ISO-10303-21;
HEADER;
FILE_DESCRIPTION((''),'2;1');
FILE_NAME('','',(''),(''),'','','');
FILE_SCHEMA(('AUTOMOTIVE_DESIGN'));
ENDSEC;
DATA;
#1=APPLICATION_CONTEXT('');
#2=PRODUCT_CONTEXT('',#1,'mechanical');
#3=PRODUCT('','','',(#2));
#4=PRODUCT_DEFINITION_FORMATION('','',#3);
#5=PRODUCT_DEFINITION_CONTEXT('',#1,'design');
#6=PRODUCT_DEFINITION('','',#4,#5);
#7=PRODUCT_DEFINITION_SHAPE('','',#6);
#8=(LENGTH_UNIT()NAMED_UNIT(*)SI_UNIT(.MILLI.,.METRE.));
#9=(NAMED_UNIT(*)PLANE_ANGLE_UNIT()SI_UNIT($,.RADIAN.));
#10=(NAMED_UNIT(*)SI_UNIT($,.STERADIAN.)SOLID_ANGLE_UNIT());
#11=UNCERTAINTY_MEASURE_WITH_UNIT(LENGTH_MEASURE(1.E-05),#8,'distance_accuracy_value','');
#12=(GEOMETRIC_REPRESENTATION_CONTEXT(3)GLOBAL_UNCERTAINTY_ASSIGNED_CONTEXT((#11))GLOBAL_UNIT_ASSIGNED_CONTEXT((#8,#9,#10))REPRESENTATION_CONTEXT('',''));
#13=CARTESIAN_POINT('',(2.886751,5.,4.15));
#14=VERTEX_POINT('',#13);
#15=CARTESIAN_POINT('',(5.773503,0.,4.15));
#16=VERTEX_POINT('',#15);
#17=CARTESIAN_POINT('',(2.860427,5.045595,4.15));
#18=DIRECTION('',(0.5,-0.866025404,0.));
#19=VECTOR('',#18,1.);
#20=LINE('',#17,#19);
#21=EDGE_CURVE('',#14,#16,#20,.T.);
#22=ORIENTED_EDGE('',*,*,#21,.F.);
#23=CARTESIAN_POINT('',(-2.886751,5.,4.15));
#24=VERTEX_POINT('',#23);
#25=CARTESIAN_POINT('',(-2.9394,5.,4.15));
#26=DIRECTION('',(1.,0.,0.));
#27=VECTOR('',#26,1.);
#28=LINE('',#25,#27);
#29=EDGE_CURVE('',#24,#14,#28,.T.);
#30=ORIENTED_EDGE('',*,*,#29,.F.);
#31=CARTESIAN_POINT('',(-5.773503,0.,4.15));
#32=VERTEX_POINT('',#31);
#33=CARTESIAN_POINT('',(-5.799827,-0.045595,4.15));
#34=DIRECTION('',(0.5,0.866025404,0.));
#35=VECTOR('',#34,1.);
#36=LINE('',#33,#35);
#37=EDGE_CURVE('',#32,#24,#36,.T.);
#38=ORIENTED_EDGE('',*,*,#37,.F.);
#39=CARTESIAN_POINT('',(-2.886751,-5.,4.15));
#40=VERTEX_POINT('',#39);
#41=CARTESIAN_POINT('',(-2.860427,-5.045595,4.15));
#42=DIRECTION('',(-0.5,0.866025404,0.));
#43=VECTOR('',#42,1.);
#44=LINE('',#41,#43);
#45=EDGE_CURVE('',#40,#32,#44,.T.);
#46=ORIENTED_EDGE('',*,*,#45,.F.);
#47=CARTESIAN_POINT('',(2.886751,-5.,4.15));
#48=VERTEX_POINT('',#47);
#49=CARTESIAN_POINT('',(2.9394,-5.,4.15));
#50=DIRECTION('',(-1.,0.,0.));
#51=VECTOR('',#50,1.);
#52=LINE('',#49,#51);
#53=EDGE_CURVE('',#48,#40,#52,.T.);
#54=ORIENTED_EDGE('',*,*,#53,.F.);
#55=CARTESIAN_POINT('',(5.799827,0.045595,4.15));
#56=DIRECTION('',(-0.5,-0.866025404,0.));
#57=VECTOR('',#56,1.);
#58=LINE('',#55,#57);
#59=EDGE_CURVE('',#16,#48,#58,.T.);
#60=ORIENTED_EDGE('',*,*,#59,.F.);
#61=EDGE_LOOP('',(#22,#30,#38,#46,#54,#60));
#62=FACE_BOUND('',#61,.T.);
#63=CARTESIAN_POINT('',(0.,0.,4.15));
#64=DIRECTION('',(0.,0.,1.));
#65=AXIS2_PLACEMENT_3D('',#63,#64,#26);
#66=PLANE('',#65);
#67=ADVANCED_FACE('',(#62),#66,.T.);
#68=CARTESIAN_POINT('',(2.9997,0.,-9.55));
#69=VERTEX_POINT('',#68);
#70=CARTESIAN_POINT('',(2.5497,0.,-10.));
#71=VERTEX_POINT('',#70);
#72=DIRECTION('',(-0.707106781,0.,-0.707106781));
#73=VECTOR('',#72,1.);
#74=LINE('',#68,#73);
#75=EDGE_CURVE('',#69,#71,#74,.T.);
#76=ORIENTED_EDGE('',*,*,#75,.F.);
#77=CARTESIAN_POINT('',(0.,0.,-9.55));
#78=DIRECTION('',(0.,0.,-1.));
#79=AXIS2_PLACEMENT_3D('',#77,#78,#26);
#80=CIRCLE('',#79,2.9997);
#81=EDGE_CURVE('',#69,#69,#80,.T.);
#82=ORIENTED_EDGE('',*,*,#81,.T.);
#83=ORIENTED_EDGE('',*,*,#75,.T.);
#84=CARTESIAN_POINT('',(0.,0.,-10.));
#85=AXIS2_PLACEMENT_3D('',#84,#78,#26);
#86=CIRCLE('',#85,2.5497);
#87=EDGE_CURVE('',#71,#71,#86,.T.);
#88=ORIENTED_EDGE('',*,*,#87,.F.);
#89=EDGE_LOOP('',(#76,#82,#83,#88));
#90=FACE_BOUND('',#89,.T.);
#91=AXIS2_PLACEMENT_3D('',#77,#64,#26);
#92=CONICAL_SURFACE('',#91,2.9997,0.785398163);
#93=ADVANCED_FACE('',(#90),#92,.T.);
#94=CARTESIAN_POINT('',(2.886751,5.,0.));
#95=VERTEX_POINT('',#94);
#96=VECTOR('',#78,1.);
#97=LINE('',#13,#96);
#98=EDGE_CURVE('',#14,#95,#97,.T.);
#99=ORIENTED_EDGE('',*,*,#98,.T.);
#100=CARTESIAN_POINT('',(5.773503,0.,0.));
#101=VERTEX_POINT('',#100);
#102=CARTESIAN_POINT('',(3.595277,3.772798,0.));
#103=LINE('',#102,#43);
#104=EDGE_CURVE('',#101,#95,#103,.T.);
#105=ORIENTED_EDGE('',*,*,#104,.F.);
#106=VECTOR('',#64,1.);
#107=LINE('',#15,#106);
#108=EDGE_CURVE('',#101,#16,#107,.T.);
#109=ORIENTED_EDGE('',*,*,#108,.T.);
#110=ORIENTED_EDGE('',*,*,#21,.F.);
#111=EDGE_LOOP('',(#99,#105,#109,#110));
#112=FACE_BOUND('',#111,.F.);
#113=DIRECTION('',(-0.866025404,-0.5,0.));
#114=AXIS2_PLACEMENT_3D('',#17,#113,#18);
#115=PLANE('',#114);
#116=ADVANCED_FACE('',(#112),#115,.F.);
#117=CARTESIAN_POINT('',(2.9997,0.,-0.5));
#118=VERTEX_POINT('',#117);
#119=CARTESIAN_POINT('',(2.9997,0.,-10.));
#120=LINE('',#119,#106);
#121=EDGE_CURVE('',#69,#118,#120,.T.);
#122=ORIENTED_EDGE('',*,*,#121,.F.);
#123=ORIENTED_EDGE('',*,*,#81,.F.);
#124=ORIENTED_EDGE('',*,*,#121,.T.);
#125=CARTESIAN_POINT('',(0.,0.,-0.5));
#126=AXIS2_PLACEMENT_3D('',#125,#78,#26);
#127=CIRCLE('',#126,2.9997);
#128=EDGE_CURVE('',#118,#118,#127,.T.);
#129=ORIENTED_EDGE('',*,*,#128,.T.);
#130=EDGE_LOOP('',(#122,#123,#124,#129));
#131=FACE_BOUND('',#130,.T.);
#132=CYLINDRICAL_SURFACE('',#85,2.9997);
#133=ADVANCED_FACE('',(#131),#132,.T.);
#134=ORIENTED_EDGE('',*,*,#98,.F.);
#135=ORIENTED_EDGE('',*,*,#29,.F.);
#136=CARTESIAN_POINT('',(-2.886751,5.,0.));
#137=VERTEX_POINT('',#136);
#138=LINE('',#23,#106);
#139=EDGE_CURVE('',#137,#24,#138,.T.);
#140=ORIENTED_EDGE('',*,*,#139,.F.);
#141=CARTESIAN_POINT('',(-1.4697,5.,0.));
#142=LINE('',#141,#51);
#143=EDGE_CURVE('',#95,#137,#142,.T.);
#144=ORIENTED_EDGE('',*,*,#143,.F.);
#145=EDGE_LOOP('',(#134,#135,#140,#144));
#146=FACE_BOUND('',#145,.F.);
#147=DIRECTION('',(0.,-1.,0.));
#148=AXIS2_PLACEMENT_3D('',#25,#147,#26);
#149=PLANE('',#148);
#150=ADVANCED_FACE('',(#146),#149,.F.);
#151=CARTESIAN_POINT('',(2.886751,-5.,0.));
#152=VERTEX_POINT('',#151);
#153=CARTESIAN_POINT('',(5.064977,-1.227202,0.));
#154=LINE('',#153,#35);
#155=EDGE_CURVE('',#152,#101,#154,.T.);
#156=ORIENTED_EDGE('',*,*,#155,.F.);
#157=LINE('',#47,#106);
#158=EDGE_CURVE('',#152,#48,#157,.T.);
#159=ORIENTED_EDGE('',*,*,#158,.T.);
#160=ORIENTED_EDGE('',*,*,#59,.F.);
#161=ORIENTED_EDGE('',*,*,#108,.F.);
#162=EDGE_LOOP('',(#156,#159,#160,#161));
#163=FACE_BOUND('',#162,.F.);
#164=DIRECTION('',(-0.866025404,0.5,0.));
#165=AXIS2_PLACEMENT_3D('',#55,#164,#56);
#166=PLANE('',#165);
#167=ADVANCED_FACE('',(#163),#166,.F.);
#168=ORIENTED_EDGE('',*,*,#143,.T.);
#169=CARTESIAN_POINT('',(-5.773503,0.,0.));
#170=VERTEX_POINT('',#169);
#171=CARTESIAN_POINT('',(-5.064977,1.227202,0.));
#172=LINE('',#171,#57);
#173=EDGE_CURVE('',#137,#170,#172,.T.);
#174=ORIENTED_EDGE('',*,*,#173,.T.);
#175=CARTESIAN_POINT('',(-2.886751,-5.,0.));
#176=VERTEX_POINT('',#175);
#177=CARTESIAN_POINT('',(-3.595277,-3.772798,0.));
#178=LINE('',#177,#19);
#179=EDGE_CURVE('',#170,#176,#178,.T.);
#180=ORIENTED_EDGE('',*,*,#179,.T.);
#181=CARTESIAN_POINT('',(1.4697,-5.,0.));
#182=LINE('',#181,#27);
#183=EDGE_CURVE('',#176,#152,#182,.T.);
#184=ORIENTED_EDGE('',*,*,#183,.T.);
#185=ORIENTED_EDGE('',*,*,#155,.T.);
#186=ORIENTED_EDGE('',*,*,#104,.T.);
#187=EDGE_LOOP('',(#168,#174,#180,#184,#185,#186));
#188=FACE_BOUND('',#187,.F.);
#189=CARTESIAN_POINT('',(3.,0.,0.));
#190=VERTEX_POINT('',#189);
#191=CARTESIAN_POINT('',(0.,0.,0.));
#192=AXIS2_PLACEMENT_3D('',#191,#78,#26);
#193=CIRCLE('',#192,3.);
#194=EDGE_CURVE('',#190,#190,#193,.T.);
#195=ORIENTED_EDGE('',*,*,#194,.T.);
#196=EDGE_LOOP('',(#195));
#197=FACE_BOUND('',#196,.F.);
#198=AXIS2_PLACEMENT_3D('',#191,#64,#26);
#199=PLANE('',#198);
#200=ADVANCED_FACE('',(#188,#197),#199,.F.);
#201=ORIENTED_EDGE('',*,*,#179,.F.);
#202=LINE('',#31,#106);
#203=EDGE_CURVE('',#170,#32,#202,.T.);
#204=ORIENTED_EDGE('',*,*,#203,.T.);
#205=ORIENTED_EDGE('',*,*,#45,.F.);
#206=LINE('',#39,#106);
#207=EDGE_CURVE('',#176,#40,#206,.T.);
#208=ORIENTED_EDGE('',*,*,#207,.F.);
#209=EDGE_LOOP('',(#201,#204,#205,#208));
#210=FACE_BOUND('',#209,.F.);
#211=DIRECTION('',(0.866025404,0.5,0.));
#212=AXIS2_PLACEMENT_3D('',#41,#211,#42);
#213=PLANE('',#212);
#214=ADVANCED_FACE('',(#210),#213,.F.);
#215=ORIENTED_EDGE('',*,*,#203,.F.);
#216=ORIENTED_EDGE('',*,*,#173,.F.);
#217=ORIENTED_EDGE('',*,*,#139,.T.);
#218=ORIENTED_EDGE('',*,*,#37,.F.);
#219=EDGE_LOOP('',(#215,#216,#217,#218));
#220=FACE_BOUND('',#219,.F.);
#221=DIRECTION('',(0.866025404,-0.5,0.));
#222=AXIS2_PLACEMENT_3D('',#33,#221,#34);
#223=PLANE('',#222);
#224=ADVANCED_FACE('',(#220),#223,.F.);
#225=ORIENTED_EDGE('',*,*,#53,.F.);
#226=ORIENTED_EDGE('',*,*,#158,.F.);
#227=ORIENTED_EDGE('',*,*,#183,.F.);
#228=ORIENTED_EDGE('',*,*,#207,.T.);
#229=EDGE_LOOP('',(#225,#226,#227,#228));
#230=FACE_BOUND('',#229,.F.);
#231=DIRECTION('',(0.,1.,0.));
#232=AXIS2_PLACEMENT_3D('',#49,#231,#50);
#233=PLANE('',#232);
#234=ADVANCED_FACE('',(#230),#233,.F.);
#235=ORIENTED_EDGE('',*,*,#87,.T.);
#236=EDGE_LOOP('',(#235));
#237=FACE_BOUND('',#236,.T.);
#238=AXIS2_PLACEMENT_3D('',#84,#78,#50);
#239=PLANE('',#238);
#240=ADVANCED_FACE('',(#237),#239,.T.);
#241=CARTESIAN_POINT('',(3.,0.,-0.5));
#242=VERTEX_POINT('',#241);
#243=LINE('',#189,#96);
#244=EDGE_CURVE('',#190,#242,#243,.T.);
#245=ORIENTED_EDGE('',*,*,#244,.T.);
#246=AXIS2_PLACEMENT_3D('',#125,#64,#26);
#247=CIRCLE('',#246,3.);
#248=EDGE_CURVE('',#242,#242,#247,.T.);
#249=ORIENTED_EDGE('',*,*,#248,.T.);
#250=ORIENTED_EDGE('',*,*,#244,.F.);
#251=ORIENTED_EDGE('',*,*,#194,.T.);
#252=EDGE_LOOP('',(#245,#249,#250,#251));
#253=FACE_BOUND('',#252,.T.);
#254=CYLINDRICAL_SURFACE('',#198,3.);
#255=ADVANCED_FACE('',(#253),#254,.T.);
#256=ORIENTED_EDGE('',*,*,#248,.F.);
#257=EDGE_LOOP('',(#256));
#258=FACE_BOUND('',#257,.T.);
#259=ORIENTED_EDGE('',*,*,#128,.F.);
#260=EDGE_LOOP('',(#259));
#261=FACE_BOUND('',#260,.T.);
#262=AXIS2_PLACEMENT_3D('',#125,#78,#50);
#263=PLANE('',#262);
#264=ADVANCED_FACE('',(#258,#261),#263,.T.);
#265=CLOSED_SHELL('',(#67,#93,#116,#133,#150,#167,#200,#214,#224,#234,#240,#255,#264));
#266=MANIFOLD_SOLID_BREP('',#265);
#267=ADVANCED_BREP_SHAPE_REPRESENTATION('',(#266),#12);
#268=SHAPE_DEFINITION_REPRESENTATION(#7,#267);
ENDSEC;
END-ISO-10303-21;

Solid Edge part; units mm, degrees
sketch "Sketch1" plane through (0, 0, 0) normal (0, 0, 1) x (1, 0, 0)
  circle A0 centre (0, 0) radius 5.8
  dimension "D1" = 11.6
extrude "Protrusion1" add sketch "Sketch1" along normal blind 4.15
sketch "Sketch2" plane through (0, 0, 0) normal (0, 0, -1) x (1, 0, 0)
  circle A0 centre (0, 0) radius 3
extrude "Protrusion2" add sketch "Sketch2" along normal blind 10
sketch "Sketch3" plane through (0, 0, -10) normal (0, 0, -1) x (1, 0, 0)
  circle A0 centre (0, 0) radius 2.9997
extrude "Cutout1" cut sketch "Sketch3" against normal blind 9.5 flip side to cut
chamfer "Chamfer_1" distance 0.45 angle 45 1 edges at (-2.9997, 0, -10)
sketch "Sketch4" plane through (0, 0, 4.15) normal (0, 0, 1) x (1, 0, 0)
  line L0 (-2.9394, 5) -> (2.9394, 5)
  dimension "D1" = 10
extrude "Cutout2" cut sketch "Sketch4" against normal up to next material side at (0, 5.05, 4.15)
pattern_circular "Pattern1" count 6 over 360 about axis through (0, 0, 4.15) along (0, 0, 1) of "Cutout2"
properties part number "24101768"
